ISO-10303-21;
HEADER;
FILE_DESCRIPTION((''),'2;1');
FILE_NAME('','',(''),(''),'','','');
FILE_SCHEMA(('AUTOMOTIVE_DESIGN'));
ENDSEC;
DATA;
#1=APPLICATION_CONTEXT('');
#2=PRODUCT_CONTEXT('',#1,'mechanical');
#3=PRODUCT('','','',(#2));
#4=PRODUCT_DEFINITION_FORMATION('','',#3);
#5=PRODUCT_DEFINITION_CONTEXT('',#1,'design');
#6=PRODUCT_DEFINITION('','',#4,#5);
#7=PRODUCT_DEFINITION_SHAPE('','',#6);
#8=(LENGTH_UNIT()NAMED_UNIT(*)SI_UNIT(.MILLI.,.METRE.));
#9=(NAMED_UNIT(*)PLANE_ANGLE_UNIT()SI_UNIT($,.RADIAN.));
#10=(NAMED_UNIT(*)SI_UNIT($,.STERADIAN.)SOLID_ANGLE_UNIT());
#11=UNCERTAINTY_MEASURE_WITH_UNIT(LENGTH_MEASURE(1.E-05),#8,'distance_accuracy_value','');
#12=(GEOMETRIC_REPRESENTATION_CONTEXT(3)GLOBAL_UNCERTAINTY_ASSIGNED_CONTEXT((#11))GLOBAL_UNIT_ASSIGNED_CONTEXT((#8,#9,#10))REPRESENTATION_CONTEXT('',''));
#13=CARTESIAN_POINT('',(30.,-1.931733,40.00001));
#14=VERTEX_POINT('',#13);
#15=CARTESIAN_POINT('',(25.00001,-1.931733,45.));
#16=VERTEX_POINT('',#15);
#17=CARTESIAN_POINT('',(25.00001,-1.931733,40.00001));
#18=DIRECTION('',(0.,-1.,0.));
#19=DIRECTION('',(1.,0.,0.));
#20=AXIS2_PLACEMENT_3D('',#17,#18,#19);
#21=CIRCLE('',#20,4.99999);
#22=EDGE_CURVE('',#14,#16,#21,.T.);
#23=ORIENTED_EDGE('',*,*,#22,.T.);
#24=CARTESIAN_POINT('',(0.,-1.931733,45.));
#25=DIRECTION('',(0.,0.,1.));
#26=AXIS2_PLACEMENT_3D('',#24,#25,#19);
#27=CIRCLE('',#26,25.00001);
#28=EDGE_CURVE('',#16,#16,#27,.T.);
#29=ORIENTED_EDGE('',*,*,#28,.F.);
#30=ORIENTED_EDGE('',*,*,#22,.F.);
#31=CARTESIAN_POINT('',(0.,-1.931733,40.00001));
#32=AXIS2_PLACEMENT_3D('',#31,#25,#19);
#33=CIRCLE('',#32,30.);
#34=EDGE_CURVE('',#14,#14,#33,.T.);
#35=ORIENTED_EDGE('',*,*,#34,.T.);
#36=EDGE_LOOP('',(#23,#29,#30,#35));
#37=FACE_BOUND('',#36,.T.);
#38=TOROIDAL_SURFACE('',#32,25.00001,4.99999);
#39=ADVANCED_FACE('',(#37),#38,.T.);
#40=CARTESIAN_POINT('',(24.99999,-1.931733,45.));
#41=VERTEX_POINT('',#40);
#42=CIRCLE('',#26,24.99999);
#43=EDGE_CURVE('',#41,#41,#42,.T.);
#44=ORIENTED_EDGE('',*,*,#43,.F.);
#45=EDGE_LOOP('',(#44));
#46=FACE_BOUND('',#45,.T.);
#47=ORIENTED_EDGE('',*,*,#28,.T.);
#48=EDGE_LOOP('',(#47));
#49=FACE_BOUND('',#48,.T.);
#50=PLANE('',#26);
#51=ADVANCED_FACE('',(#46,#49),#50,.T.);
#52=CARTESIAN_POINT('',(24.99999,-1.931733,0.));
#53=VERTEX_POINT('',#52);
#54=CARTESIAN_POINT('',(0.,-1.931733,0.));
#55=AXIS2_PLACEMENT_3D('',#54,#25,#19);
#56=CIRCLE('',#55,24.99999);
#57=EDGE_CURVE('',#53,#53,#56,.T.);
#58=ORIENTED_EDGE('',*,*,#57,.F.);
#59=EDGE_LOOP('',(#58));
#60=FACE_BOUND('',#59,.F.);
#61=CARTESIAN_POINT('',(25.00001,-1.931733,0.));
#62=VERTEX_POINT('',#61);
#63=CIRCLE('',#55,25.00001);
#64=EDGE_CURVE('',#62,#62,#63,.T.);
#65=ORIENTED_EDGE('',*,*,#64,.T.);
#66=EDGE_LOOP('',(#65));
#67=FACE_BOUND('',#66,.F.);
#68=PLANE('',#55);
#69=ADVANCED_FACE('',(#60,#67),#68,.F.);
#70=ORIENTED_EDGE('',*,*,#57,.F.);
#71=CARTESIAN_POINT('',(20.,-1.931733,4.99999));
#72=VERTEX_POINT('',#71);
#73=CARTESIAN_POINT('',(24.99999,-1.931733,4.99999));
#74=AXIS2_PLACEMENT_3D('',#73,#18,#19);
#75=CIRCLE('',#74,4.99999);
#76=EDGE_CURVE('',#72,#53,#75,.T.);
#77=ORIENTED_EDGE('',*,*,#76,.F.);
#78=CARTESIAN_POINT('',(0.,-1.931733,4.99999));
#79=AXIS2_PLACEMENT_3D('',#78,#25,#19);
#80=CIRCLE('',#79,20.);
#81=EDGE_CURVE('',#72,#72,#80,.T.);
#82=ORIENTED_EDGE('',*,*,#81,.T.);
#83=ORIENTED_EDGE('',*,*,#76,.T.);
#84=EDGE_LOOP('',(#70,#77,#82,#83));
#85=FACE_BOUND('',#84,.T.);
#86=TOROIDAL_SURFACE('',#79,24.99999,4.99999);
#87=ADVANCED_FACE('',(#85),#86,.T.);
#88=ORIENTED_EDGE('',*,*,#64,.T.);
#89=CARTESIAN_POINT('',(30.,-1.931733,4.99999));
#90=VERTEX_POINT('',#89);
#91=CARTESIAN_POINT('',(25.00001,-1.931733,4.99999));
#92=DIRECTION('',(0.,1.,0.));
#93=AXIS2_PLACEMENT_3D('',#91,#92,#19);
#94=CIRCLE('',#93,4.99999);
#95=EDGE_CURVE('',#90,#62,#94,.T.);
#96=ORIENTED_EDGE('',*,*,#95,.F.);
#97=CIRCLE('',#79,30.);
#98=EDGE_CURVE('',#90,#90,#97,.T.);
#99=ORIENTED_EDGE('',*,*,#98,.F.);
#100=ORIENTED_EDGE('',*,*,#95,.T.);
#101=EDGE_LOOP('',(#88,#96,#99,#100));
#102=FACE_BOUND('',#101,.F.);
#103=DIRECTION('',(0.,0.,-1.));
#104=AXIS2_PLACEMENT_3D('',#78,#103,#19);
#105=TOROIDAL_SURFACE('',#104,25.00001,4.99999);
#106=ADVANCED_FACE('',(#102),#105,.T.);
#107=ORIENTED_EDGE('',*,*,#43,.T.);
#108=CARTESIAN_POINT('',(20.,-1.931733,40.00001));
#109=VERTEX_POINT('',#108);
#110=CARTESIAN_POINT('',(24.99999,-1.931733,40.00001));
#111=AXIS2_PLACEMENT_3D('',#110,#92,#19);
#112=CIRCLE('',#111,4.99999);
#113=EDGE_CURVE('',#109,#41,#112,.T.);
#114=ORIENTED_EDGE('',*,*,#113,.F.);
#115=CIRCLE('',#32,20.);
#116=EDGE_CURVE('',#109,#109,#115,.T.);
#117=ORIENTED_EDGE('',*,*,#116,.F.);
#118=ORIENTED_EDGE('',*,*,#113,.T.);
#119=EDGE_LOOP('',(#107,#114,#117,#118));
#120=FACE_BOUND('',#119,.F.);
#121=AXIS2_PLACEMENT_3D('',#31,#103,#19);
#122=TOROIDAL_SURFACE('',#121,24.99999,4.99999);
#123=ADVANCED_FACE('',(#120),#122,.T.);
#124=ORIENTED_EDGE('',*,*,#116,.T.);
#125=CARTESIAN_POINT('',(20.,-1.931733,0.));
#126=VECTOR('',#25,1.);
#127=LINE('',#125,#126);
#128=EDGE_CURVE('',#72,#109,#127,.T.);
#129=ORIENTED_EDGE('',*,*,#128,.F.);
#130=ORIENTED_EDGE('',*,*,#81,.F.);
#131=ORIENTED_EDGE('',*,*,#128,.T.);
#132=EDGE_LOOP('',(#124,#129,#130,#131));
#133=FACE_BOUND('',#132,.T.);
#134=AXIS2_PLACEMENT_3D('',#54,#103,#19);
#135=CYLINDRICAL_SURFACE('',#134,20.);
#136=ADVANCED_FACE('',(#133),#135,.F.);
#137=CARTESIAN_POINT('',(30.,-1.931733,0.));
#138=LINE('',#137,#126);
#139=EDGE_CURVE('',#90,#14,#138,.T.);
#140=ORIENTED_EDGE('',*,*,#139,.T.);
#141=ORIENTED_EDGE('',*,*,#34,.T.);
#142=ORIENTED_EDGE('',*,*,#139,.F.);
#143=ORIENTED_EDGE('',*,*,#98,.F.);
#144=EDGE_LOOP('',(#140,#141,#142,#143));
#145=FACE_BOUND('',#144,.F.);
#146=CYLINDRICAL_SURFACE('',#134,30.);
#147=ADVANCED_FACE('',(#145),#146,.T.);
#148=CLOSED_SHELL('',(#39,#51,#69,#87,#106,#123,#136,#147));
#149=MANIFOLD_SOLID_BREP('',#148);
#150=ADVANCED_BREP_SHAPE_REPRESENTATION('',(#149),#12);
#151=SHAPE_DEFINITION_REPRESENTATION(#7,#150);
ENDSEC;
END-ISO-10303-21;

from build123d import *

# Parameters (mm, degrees)
F0_R     = 30
F0_R_2   = 20
F1_DEPTH = 45
F2_R     = 4.99999


# Not quite as in the source:
# - a fillet or chamfer is up to 0.001 mm smaller than in the source, because OpenCascade refuses the exact size


with BuildPart() as f1:
    # F0 (on Top) → F1 (new body)
    with BuildSketch(Plane.XY):
        with Locations((0, -1.9317325205)):
            Circle(F0_R)
        with Locations((0, -1.9317325205)):
            Circle(F0_R_2, mode=Mode.SUBTRACT)
    extrude(amount=F1_DEPTH)

    # F2 (radius 5 in the source; OpenCascade refuses exactly that, so slightly less here)
    f2_edges = [f1.edges().sort_by_distance(p)[0] for p in [
        (-30, -1.931733, 0),
        (-20, -1.931733, 0),
        (-20, -1.931733, 45),
        (-30, -1.931733, 45),
    ]]
    fillet(f2_edges, radius=F2_R)


solid = f1.part
